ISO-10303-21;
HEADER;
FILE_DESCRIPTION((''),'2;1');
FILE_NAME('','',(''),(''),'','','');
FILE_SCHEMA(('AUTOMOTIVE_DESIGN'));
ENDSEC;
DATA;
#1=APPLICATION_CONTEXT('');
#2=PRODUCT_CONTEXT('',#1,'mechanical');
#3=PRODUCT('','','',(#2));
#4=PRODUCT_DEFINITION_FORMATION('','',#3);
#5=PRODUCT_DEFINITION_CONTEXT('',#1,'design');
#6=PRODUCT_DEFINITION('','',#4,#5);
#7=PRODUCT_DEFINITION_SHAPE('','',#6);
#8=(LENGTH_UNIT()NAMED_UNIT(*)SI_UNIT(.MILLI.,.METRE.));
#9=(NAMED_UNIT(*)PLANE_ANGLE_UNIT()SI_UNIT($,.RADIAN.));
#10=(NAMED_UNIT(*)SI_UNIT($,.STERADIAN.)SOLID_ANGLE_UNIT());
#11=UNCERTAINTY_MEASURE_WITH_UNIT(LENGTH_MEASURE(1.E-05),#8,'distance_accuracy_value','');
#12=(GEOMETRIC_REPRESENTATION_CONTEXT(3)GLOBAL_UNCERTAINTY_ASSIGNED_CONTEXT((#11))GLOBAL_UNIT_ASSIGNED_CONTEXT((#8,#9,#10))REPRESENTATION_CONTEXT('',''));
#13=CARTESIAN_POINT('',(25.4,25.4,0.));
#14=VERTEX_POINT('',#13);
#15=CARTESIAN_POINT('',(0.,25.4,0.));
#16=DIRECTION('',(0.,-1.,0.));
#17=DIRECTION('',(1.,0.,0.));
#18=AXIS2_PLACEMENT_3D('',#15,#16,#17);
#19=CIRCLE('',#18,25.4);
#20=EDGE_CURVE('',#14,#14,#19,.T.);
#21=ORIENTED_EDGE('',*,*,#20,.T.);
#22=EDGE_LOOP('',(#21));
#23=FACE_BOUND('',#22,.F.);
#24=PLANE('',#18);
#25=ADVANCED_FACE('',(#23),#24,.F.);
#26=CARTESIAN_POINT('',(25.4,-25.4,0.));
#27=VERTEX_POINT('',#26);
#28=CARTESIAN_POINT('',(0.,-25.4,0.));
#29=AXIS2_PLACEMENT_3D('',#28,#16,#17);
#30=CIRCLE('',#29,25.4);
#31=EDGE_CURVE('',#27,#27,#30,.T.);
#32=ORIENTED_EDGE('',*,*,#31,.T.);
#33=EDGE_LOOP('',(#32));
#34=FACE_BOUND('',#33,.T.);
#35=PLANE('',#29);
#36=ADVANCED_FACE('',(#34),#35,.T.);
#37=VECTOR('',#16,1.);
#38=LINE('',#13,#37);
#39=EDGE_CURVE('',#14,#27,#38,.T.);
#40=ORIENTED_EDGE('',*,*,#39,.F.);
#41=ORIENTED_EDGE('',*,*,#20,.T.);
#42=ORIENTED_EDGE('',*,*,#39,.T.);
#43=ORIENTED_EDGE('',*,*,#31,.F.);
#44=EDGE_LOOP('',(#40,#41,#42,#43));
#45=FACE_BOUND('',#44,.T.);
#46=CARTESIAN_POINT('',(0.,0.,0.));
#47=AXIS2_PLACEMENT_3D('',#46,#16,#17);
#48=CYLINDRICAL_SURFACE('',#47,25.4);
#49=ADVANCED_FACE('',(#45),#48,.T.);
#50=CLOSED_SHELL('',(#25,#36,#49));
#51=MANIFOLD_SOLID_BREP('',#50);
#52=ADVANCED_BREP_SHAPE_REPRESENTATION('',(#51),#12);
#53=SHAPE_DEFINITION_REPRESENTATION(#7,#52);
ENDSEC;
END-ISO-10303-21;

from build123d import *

# Parameters (mm, degrees)
F0_R     = 25.4
F1_DEPTH = 25.4


# Not quite as in the source:
# - the program builds the solid bodies; features that only make, move or delete a surface that nothing else refers to are left out


with BuildPart() as f1:
    # F0 (on Front) → F1 (new body, symmetric)
    with BuildSketch(Plane.XZ):
        Circle(F0_R)
    extrude(amount=F1_DEPTH, both=True)


solid = f1.part
